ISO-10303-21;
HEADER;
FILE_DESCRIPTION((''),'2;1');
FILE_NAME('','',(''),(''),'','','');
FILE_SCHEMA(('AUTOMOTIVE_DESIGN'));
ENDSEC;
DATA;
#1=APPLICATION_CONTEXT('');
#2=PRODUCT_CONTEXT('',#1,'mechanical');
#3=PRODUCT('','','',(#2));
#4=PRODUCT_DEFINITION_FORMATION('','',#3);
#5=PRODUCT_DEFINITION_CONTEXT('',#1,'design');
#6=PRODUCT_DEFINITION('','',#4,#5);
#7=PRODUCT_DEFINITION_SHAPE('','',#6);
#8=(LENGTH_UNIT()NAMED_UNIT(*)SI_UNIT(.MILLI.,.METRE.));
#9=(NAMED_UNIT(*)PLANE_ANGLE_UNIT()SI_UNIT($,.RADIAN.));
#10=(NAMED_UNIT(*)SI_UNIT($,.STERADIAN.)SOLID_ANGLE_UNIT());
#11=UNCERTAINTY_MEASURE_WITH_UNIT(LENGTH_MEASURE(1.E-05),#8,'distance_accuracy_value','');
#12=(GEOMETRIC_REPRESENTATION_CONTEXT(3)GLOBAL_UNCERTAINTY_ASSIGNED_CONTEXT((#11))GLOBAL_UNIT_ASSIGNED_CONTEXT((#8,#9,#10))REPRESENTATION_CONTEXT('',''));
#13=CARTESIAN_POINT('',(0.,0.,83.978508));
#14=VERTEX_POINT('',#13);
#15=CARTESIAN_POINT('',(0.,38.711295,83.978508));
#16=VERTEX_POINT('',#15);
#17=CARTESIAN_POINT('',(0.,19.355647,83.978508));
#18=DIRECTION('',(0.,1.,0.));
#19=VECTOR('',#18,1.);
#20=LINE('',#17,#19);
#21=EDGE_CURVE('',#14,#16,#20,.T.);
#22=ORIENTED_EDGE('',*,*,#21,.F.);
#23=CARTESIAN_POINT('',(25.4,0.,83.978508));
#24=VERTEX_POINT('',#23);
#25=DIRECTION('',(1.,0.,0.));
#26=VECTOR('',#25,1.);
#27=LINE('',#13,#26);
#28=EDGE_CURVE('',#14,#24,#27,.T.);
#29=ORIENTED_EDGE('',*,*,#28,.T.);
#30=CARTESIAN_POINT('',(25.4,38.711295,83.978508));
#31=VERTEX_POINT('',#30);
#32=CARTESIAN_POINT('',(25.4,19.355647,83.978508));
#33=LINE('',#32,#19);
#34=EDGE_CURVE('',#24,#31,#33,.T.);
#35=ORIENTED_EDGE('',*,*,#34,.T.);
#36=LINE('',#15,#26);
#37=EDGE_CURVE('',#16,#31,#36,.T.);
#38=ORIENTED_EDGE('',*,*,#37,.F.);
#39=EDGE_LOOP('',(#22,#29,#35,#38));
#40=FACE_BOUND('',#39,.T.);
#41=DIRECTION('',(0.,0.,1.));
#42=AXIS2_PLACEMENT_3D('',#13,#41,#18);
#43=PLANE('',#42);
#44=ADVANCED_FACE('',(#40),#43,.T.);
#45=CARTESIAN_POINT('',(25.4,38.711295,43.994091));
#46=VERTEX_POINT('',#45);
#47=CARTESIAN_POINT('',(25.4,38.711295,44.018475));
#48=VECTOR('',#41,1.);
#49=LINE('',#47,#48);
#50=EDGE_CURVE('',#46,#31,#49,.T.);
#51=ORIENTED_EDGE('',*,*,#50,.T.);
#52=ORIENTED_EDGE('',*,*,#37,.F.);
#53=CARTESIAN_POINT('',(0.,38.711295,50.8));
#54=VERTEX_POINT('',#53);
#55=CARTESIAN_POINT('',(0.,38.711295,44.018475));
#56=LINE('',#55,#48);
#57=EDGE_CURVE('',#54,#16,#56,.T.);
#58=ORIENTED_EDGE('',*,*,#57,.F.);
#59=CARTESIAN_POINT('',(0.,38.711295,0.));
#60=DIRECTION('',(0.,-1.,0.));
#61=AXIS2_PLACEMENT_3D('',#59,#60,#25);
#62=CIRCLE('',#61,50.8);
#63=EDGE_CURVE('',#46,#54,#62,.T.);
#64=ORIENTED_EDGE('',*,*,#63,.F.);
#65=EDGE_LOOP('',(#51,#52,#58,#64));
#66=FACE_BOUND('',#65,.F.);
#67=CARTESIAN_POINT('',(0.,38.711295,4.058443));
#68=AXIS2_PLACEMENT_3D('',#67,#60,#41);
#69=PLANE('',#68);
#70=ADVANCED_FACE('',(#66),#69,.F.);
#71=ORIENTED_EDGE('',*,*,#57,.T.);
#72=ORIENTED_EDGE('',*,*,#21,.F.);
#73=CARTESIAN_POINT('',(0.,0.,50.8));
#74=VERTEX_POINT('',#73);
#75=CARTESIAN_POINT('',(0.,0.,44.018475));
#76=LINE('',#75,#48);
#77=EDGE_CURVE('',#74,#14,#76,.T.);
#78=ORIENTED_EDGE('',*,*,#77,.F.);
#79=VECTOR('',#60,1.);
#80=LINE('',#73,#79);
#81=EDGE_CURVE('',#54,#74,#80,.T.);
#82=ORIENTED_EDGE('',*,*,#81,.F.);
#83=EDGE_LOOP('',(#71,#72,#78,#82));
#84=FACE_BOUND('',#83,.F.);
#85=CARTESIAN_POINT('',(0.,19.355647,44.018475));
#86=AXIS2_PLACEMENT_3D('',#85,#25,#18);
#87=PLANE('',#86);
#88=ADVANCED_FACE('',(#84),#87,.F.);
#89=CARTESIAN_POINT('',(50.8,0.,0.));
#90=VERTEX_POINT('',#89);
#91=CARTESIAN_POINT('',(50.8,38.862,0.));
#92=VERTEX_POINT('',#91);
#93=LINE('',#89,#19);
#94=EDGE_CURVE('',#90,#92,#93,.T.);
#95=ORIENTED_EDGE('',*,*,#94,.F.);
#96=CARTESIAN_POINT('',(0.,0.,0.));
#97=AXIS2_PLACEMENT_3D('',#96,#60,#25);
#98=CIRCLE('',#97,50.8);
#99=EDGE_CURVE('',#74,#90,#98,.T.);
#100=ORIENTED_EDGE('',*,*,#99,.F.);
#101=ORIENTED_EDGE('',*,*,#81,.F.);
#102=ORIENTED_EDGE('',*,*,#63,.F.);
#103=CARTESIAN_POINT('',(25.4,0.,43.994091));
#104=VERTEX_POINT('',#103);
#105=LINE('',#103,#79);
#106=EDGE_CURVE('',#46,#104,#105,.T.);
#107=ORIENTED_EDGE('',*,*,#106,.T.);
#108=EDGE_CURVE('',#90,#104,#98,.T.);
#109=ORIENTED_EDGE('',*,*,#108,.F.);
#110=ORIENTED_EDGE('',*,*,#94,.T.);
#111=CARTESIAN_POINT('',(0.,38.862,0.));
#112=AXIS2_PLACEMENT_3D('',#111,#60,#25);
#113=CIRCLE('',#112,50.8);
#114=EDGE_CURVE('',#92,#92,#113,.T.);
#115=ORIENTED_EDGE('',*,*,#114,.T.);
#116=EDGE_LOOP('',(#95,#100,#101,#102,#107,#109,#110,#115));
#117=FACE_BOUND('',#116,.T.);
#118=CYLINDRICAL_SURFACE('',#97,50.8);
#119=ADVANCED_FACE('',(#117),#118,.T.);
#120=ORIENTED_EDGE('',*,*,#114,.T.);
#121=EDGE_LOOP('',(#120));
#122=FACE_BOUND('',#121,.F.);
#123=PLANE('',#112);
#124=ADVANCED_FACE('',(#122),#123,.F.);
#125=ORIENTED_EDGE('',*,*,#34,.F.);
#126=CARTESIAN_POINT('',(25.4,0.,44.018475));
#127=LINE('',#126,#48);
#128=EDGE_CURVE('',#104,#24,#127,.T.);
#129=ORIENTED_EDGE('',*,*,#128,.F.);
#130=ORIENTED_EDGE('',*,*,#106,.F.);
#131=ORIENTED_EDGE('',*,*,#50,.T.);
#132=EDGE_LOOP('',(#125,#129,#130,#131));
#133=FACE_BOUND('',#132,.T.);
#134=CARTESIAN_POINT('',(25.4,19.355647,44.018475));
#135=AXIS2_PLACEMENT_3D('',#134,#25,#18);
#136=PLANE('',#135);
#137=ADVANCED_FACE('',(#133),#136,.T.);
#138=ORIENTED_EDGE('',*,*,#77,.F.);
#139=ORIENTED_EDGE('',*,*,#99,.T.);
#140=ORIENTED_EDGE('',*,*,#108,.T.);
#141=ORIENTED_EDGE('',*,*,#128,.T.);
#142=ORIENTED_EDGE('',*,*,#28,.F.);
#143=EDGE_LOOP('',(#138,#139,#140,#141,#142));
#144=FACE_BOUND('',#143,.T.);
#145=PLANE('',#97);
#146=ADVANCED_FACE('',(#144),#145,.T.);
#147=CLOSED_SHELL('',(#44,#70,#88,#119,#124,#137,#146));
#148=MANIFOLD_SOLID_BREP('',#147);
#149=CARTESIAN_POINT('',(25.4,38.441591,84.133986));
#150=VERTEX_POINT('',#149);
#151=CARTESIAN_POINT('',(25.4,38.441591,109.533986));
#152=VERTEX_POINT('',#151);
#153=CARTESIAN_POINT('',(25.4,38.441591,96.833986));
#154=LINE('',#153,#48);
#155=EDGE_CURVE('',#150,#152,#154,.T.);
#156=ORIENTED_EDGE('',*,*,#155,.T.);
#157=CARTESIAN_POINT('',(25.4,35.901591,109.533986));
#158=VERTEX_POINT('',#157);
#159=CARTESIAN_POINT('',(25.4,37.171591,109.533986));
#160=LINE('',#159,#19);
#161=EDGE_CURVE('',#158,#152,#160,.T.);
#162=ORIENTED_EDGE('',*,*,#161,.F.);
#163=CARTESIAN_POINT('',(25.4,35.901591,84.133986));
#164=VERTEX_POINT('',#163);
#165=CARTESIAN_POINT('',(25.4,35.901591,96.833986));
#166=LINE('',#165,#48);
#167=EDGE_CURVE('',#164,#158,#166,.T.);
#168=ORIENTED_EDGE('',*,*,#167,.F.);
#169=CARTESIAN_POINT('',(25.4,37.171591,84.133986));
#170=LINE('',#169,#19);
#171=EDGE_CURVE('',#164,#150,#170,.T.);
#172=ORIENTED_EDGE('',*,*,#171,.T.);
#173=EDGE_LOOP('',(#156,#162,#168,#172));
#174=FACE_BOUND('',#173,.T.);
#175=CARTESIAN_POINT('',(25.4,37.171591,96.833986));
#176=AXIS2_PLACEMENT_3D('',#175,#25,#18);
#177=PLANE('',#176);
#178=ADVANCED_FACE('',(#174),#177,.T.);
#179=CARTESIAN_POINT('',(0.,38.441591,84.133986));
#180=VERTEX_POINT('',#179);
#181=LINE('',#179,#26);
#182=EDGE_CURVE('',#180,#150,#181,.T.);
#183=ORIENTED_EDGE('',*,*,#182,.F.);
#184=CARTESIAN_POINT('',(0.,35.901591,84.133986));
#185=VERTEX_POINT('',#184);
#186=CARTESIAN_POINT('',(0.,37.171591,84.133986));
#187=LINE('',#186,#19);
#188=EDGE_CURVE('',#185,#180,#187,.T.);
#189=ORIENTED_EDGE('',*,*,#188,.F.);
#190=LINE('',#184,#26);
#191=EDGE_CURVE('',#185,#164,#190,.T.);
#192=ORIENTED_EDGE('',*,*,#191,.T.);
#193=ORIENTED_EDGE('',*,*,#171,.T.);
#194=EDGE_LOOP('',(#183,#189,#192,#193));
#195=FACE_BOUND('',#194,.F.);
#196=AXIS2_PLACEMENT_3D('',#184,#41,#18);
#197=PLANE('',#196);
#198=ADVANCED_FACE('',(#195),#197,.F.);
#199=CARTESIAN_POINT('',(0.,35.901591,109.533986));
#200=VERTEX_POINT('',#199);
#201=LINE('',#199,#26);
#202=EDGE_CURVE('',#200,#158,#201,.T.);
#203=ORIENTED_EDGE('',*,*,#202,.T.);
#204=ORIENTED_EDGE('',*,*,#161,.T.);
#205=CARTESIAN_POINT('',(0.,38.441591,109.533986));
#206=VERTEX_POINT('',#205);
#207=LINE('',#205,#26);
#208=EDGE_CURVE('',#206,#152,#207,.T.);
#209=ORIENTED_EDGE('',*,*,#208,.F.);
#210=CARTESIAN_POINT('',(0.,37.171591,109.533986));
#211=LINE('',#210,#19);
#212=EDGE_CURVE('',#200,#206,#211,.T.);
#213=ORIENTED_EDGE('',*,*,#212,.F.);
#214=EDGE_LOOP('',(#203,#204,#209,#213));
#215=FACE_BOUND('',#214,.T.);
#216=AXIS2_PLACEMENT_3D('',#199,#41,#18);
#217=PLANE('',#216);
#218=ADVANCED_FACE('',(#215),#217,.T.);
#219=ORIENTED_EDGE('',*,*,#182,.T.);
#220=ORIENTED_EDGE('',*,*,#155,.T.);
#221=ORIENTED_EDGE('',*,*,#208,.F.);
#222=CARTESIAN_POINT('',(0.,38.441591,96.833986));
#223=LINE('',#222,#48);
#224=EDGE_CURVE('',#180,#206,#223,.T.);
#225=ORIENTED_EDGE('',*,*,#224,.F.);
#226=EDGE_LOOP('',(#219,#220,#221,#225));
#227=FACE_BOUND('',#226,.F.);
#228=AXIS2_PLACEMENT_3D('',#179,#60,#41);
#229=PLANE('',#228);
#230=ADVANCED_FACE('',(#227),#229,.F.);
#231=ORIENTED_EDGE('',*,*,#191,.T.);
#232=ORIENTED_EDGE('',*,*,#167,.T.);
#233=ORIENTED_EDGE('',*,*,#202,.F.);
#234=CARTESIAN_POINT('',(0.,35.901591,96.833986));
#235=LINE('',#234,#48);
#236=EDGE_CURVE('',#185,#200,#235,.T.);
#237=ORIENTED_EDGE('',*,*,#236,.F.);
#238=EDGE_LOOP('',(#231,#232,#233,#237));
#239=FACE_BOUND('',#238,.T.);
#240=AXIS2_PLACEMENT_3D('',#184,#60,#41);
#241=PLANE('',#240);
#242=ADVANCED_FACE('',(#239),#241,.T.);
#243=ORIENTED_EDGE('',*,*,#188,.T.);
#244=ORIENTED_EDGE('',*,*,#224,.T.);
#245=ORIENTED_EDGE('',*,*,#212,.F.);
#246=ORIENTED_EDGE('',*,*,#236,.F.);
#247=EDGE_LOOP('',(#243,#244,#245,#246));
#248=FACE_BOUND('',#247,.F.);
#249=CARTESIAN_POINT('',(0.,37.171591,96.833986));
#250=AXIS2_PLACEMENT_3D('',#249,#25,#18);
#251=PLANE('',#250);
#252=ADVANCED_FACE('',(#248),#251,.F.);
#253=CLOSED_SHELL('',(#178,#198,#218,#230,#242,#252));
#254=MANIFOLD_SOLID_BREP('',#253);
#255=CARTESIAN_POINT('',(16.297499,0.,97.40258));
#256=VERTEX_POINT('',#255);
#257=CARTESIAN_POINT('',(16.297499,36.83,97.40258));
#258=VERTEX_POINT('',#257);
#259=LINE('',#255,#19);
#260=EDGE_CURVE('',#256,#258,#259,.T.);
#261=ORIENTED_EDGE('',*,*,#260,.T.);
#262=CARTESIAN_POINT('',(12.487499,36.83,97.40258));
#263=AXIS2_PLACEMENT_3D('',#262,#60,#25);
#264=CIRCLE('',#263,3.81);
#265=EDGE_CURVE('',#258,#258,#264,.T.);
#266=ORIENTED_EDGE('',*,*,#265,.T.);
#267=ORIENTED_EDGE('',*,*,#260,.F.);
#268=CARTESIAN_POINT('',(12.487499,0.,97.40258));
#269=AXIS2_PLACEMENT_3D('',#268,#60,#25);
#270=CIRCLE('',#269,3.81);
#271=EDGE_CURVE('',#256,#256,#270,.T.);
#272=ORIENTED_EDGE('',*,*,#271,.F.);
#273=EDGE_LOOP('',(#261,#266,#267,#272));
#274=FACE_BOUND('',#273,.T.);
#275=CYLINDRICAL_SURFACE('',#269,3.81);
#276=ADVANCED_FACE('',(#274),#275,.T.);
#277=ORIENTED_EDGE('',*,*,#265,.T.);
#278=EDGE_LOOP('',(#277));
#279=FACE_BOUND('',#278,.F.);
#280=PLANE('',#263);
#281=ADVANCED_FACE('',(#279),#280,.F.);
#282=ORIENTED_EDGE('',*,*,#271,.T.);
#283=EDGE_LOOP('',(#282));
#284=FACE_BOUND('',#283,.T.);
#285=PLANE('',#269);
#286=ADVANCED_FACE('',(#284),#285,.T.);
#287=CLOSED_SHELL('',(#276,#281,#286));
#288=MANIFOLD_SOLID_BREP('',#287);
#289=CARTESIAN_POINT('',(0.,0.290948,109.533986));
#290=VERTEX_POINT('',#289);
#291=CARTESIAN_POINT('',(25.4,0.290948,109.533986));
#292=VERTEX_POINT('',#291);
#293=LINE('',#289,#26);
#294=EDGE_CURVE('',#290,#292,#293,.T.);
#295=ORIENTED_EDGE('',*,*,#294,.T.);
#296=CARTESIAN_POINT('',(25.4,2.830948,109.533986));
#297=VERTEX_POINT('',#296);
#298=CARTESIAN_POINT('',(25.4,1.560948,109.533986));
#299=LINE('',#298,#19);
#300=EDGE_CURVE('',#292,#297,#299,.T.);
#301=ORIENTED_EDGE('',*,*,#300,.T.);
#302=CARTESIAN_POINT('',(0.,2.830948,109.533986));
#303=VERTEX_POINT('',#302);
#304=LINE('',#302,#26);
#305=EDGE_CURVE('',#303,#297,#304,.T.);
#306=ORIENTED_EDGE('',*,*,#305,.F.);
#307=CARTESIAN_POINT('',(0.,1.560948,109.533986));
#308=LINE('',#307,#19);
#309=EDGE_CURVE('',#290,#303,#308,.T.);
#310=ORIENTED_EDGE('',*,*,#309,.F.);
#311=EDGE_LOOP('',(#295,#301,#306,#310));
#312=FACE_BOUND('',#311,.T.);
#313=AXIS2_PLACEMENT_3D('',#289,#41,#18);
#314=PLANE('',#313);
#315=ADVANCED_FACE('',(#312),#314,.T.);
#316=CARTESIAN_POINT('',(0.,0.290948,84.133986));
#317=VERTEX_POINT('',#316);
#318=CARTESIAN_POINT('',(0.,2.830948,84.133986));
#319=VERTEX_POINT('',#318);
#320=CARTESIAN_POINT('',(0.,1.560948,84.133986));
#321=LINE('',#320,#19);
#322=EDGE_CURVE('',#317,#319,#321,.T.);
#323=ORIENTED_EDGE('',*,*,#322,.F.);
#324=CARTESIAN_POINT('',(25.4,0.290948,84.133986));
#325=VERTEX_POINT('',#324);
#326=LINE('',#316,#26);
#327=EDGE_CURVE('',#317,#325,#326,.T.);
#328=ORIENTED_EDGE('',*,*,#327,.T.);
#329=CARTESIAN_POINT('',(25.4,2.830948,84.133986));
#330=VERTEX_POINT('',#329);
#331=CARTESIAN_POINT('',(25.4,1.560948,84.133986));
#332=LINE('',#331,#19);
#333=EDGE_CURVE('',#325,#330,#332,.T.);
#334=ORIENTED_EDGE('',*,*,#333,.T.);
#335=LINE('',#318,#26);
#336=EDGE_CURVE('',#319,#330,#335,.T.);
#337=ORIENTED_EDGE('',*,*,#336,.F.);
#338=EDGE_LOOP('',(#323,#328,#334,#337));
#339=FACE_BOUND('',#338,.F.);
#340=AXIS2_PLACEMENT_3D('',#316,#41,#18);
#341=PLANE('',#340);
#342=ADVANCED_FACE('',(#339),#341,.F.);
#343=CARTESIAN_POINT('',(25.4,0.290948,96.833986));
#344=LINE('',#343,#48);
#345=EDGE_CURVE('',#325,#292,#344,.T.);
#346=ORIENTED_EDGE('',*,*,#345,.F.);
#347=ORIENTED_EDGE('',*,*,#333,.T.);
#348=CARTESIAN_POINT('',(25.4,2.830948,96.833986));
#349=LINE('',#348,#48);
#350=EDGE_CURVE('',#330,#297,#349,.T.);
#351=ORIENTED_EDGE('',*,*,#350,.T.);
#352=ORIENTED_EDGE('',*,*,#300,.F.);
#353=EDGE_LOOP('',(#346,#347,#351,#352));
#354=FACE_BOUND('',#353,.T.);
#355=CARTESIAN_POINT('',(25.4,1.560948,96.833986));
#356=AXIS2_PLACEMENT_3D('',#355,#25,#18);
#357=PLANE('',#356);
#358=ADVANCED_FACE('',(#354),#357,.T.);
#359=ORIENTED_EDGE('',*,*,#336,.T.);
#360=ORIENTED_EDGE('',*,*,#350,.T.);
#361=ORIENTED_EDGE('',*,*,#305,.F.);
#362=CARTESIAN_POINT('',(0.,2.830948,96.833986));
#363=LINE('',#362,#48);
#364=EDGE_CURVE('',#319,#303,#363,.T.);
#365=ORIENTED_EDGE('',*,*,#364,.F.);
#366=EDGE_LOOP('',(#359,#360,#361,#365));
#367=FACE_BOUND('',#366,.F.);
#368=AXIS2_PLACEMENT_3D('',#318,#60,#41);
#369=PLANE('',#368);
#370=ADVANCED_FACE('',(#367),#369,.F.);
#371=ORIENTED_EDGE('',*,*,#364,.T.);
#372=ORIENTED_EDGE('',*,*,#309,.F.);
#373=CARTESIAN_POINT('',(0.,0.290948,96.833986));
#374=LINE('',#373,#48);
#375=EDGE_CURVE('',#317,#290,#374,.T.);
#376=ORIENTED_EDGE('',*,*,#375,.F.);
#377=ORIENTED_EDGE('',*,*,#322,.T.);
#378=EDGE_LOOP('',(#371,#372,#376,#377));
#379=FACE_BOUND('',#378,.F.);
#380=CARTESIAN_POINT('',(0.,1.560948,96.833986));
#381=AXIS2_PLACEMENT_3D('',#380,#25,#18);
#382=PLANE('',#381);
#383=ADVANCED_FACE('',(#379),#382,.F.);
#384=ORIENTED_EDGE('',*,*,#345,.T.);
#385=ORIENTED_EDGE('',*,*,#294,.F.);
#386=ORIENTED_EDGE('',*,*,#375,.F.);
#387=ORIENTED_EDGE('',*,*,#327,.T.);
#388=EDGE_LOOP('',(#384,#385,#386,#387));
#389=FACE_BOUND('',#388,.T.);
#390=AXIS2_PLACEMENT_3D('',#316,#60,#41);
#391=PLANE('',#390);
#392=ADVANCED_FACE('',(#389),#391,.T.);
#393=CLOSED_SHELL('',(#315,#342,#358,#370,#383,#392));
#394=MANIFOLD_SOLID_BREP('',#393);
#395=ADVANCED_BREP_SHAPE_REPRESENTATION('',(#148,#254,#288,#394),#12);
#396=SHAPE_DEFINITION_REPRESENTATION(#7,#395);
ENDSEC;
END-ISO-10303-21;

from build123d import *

# Parameters (mm, degrees)
F0_R     = 50.8
F1_DEPTH = 38.862
F2_W     = 38.7112945318
F2_H     = 79.9200646579
F4_DEPTH = 25.4
F5_W     = 2.54
F5_H     = 25.4
F6_DEPTH = 25.4
F7_R     = 3.81
F8_DEPTH = 36.83


# Not quite as in the source:
# - the program builds the solid bodies; features that only make, move or delete a surface that nothing else refers to are left out


with BuildPart() as f1:
    # F0 (on Front) → F1 (new body)
    with BuildSketch(Plane.XZ):
        Circle(F0_R)
    extrude(amount=-F1_DEPTH)

    # F2 (on Right) → F4 (join)
    with BuildSketch(Plane.YZ):
        with Locations((19.3556472659, 44.0184753388)):
            Rectangle(F2_W, F2_H)
    extrude(amount=F4_DEPTH)


with BuildPart() as f6:
    # F5 (on Right) → F6 (new body)
    with BuildSketch(Plane.YZ):
        with Locations((1.5609483235, 96.833985544)):
            Rectangle(F5_W, F5_H)
    extrude(amount=F6_DEPTH)


with BuildPart() as f6b:
    # F5 (on Right) → F6, piece 2 (new body)
    with BuildSketch(Plane.YZ):
        with Locations((37.1715911818, 96.833985544)):
            Rectangle(F5_W, F5_H)
    extrude(amount=F6_DEPTH)


with BuildPart() as f8:
    # F7 (on Front) → F8 (new body)
    with BuildSketch(Plane.XZ):
        with Locations((12.4874990433, 97.4025800824)):
            Circle(F7_R)
    extrude(amount=-F8_DEPTH)


solid = Compound([f1.part, f6.part, f6b.part, f8.part])
